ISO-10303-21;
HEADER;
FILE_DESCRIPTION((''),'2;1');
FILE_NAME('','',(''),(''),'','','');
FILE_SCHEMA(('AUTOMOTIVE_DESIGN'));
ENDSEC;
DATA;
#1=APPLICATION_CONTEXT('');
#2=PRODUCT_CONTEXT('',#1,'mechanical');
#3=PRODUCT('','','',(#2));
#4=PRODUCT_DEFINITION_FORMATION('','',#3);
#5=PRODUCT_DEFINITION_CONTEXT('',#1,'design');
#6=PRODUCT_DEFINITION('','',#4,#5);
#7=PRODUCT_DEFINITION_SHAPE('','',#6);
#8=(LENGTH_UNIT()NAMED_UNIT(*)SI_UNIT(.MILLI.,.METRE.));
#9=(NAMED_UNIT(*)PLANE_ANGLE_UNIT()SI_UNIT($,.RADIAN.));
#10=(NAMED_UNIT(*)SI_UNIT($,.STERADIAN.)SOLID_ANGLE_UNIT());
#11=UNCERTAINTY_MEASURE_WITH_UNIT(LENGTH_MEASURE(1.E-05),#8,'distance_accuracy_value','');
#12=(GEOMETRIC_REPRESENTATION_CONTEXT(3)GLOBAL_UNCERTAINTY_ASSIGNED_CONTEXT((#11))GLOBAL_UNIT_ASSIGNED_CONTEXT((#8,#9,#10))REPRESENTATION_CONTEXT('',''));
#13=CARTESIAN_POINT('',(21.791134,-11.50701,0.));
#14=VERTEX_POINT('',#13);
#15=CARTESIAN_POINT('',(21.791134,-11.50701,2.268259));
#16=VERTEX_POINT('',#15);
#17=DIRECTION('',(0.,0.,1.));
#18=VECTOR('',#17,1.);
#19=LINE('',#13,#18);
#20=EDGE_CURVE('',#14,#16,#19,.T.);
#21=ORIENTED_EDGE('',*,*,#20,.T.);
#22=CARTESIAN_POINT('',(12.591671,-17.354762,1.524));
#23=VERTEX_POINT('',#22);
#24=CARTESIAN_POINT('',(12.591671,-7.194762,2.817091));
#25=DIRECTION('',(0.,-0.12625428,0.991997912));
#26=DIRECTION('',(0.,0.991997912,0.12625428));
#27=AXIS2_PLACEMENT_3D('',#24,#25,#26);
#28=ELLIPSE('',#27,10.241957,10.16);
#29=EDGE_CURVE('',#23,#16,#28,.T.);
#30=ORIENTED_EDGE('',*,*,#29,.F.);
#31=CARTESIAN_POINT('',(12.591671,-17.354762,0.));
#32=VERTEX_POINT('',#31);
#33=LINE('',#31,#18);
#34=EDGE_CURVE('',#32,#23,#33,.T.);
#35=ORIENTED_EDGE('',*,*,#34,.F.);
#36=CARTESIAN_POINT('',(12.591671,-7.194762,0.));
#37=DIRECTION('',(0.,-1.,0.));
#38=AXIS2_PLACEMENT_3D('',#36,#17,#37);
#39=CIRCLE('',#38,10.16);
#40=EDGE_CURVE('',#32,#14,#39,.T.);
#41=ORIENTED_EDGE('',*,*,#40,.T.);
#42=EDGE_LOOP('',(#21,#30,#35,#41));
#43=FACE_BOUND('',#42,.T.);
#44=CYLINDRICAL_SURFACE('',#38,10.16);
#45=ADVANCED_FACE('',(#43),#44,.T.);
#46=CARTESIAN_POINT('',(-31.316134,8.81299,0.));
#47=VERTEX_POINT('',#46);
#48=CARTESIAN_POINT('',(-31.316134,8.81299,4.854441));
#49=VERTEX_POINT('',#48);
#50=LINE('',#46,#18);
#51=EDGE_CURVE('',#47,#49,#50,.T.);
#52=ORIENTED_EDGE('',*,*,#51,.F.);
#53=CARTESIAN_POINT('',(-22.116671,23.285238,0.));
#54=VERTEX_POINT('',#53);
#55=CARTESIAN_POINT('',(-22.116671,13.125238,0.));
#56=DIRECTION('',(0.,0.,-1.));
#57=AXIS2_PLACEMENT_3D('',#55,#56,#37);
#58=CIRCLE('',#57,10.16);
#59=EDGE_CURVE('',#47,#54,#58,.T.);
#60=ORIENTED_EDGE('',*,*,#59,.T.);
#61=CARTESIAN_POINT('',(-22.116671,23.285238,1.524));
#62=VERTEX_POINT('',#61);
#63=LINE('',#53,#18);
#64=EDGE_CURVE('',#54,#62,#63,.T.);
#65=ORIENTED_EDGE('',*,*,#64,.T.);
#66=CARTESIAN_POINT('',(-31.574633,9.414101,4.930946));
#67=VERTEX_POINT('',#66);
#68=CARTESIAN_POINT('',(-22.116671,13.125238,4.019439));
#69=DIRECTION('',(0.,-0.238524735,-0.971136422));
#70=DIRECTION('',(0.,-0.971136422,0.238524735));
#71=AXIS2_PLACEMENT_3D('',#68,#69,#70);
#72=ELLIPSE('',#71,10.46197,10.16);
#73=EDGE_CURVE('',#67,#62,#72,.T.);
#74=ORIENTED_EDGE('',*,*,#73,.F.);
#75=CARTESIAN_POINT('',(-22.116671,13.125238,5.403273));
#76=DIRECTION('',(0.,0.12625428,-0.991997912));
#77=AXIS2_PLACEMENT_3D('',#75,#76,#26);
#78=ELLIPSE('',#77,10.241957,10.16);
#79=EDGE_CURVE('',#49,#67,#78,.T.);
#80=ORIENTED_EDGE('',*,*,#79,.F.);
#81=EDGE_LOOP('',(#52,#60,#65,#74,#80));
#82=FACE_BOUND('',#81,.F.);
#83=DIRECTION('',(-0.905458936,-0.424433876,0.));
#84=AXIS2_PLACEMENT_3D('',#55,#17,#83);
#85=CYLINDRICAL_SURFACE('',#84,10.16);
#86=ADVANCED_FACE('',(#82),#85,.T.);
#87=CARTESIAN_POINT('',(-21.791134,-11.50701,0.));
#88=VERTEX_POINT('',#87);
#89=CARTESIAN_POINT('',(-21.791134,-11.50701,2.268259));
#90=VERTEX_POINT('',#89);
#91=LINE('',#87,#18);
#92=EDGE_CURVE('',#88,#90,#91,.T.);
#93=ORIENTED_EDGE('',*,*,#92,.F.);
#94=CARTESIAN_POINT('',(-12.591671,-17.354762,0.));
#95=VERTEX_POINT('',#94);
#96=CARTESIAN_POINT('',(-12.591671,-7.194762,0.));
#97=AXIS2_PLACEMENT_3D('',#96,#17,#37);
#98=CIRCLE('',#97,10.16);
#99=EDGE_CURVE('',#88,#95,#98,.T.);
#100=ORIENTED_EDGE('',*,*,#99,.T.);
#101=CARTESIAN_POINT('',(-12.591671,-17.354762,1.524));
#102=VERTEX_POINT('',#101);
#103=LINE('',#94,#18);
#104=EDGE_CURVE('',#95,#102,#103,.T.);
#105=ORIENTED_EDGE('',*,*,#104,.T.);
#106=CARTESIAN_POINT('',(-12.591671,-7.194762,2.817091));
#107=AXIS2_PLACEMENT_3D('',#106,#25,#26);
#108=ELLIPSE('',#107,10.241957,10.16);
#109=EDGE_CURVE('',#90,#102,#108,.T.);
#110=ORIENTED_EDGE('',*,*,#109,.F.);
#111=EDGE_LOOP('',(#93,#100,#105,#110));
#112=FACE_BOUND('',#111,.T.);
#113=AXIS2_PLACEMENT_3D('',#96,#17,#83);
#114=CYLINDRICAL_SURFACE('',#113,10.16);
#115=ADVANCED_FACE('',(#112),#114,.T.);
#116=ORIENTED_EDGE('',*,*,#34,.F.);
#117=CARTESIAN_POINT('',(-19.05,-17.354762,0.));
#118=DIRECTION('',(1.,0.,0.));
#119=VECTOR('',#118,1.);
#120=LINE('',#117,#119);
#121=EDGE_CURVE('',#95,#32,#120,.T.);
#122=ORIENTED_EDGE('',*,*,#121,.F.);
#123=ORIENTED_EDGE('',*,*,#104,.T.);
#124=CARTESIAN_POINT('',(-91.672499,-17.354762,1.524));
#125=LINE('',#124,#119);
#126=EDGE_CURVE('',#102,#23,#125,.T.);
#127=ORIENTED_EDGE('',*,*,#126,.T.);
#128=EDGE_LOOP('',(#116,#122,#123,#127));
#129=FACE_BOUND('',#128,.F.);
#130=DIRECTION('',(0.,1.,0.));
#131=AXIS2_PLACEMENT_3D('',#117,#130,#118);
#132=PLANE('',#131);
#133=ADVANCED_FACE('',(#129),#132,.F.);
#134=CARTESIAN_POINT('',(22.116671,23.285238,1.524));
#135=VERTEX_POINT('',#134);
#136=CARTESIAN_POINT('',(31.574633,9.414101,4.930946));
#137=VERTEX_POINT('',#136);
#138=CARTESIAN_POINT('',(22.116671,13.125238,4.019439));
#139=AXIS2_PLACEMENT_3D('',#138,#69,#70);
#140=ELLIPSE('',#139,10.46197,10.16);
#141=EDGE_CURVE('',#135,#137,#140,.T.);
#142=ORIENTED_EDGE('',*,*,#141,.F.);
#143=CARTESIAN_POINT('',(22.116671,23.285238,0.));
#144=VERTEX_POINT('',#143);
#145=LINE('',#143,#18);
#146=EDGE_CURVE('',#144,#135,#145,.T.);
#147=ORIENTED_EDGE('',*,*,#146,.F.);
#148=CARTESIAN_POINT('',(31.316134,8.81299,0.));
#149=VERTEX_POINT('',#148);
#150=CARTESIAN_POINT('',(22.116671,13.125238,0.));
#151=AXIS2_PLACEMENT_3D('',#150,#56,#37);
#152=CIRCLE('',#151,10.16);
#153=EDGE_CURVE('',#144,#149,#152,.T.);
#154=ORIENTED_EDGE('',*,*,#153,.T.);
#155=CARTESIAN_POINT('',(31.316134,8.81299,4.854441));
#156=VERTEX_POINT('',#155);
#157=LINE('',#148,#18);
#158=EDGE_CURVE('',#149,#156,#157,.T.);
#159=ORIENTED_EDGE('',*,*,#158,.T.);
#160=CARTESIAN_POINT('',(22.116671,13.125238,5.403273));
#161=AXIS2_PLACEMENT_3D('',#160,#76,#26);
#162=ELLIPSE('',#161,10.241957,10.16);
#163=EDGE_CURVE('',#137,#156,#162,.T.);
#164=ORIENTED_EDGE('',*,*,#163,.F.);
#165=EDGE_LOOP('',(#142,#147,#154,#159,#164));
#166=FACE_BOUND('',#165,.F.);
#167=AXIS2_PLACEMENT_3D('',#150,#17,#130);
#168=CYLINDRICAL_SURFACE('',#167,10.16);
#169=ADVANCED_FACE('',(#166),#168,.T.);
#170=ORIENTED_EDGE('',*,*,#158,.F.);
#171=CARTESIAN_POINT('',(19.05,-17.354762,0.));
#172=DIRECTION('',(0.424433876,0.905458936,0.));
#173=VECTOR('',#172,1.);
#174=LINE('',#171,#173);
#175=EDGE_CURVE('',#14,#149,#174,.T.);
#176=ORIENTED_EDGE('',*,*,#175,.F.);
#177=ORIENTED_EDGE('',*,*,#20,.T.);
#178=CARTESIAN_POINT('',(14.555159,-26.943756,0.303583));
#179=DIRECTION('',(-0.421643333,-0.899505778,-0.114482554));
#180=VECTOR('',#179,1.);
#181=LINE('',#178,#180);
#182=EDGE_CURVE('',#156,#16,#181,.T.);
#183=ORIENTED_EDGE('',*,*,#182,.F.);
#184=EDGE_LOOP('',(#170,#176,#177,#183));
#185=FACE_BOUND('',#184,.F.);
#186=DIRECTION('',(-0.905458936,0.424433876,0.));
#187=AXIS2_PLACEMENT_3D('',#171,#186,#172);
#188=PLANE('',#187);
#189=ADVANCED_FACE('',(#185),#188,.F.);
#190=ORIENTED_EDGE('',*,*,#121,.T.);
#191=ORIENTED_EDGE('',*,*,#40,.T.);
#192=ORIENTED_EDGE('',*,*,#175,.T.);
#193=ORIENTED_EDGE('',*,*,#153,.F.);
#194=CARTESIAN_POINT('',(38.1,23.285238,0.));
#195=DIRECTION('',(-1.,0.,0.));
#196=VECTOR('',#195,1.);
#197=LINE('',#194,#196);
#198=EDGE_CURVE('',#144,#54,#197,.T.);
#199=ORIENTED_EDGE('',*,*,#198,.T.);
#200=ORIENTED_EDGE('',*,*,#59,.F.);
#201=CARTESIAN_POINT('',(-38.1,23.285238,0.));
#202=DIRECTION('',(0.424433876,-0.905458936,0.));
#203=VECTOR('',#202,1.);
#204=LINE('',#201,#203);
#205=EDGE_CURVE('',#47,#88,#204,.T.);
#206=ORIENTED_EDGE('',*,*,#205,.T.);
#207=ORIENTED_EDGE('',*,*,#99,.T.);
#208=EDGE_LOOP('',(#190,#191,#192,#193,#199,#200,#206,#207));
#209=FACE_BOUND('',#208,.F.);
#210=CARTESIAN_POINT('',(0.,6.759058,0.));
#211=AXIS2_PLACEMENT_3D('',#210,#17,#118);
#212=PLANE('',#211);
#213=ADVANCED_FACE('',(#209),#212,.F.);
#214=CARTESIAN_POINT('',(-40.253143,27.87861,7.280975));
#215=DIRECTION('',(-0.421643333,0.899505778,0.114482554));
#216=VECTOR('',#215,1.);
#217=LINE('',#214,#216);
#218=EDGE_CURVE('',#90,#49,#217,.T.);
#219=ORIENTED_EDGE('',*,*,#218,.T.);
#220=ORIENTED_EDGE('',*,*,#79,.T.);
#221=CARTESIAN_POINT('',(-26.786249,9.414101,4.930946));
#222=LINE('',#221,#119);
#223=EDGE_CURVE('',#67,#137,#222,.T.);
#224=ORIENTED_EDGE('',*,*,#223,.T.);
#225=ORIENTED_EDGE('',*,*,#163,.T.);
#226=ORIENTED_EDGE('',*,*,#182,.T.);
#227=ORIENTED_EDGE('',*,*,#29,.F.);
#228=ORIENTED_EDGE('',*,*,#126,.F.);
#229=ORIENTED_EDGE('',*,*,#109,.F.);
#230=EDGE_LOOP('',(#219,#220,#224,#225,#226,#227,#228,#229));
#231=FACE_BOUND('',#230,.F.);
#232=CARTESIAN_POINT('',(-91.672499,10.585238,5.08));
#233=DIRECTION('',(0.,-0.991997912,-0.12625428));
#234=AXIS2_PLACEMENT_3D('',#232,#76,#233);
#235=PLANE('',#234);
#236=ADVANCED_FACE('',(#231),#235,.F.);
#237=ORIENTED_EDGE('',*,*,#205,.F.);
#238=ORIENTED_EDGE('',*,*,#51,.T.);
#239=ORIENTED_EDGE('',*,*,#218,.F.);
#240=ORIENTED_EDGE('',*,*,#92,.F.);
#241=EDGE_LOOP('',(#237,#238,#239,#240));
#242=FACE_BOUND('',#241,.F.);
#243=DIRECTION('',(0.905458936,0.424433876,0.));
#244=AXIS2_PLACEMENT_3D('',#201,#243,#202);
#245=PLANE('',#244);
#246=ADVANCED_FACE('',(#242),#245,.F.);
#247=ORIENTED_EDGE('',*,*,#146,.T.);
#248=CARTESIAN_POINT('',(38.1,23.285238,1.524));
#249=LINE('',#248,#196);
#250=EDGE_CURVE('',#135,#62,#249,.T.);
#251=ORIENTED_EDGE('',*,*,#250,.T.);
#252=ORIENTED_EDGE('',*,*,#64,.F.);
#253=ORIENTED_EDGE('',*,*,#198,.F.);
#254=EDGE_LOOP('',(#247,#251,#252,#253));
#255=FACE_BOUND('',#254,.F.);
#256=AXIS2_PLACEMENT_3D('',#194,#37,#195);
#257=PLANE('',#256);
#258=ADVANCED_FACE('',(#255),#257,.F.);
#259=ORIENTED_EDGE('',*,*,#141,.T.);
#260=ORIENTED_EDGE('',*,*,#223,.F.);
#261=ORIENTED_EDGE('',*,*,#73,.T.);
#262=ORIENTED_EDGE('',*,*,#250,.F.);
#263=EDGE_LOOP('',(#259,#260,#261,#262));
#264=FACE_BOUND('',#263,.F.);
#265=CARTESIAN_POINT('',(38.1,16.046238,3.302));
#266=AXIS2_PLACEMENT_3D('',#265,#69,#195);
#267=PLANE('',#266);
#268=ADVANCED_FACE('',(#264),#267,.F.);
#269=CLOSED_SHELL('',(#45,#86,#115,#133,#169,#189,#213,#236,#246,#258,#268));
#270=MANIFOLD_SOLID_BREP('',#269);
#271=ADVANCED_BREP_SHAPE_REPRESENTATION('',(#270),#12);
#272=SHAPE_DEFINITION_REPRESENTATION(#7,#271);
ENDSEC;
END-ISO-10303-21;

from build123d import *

# Parameters (mm, degrees)
F1_DEPTH    = 5.08
F2_SIZE2    = 3.556
F2_SIZE     = 14.478
F3_T1_DEPTH = 183.3449978003
F4_R        = 10.16


# Not quite as in the source:
# - a fillet or chamfer that OpenCascade refuses, or shapes differently, is made with other operations: its cross-section is extruded or revolved along the edge and cut away or added


with BuildPart() as f1:
    # F0 (on Top) → F1 (new body)
    with BuildSketch(Plane.XY):
        Polygon((-38.1, 23.2852384394), (-19.05, -17.3547615606), (19.05, -17.3547615606), (38.1, 23.2852384394), align=None)
    extrude(amount=F1_DEPTH)

    # F2
    f2_edges = [f1.edges().sort_by_distance(p)[0] for p in [
        (0, 23.285238, 5.08),
    ]]
    f2_side = f1.faces().sort_by_distance((0, 5.223016, 5.08))[0]
    chamfer(f2_edges, length=F2_SIZE, length2=F2_SIZE2, reference=f2_side)

    # F3: chamfer of 27.94 x 3.556 on 1 edges, made by hand

    # F3_s2 → F3_t1 (cut)
    with BuildSketch(Plane.YZ.offset(-91.6724989001)):
        Polygon((10.5852384394, 5.08), (-17.3547615606, 1.524), (-17.3547615606, 5.08), align=None)
    extrude(amount=F3_T1_DEPTH, mode=Mode.SUBTRACT)

    # F4
    f4_edges = [f1.edges().sort_by_distance(p)[0] for p in [
        (19.05, -17.354762, 0.762),
        (-19.05, -17.354762, 0.762),
        (38.1, 23.285238, 0.762),
        (-38.1, 23.285238, 0.762),
    ]]
    fillet(f4_edges, radius=F4_R)


solid = f1.part
